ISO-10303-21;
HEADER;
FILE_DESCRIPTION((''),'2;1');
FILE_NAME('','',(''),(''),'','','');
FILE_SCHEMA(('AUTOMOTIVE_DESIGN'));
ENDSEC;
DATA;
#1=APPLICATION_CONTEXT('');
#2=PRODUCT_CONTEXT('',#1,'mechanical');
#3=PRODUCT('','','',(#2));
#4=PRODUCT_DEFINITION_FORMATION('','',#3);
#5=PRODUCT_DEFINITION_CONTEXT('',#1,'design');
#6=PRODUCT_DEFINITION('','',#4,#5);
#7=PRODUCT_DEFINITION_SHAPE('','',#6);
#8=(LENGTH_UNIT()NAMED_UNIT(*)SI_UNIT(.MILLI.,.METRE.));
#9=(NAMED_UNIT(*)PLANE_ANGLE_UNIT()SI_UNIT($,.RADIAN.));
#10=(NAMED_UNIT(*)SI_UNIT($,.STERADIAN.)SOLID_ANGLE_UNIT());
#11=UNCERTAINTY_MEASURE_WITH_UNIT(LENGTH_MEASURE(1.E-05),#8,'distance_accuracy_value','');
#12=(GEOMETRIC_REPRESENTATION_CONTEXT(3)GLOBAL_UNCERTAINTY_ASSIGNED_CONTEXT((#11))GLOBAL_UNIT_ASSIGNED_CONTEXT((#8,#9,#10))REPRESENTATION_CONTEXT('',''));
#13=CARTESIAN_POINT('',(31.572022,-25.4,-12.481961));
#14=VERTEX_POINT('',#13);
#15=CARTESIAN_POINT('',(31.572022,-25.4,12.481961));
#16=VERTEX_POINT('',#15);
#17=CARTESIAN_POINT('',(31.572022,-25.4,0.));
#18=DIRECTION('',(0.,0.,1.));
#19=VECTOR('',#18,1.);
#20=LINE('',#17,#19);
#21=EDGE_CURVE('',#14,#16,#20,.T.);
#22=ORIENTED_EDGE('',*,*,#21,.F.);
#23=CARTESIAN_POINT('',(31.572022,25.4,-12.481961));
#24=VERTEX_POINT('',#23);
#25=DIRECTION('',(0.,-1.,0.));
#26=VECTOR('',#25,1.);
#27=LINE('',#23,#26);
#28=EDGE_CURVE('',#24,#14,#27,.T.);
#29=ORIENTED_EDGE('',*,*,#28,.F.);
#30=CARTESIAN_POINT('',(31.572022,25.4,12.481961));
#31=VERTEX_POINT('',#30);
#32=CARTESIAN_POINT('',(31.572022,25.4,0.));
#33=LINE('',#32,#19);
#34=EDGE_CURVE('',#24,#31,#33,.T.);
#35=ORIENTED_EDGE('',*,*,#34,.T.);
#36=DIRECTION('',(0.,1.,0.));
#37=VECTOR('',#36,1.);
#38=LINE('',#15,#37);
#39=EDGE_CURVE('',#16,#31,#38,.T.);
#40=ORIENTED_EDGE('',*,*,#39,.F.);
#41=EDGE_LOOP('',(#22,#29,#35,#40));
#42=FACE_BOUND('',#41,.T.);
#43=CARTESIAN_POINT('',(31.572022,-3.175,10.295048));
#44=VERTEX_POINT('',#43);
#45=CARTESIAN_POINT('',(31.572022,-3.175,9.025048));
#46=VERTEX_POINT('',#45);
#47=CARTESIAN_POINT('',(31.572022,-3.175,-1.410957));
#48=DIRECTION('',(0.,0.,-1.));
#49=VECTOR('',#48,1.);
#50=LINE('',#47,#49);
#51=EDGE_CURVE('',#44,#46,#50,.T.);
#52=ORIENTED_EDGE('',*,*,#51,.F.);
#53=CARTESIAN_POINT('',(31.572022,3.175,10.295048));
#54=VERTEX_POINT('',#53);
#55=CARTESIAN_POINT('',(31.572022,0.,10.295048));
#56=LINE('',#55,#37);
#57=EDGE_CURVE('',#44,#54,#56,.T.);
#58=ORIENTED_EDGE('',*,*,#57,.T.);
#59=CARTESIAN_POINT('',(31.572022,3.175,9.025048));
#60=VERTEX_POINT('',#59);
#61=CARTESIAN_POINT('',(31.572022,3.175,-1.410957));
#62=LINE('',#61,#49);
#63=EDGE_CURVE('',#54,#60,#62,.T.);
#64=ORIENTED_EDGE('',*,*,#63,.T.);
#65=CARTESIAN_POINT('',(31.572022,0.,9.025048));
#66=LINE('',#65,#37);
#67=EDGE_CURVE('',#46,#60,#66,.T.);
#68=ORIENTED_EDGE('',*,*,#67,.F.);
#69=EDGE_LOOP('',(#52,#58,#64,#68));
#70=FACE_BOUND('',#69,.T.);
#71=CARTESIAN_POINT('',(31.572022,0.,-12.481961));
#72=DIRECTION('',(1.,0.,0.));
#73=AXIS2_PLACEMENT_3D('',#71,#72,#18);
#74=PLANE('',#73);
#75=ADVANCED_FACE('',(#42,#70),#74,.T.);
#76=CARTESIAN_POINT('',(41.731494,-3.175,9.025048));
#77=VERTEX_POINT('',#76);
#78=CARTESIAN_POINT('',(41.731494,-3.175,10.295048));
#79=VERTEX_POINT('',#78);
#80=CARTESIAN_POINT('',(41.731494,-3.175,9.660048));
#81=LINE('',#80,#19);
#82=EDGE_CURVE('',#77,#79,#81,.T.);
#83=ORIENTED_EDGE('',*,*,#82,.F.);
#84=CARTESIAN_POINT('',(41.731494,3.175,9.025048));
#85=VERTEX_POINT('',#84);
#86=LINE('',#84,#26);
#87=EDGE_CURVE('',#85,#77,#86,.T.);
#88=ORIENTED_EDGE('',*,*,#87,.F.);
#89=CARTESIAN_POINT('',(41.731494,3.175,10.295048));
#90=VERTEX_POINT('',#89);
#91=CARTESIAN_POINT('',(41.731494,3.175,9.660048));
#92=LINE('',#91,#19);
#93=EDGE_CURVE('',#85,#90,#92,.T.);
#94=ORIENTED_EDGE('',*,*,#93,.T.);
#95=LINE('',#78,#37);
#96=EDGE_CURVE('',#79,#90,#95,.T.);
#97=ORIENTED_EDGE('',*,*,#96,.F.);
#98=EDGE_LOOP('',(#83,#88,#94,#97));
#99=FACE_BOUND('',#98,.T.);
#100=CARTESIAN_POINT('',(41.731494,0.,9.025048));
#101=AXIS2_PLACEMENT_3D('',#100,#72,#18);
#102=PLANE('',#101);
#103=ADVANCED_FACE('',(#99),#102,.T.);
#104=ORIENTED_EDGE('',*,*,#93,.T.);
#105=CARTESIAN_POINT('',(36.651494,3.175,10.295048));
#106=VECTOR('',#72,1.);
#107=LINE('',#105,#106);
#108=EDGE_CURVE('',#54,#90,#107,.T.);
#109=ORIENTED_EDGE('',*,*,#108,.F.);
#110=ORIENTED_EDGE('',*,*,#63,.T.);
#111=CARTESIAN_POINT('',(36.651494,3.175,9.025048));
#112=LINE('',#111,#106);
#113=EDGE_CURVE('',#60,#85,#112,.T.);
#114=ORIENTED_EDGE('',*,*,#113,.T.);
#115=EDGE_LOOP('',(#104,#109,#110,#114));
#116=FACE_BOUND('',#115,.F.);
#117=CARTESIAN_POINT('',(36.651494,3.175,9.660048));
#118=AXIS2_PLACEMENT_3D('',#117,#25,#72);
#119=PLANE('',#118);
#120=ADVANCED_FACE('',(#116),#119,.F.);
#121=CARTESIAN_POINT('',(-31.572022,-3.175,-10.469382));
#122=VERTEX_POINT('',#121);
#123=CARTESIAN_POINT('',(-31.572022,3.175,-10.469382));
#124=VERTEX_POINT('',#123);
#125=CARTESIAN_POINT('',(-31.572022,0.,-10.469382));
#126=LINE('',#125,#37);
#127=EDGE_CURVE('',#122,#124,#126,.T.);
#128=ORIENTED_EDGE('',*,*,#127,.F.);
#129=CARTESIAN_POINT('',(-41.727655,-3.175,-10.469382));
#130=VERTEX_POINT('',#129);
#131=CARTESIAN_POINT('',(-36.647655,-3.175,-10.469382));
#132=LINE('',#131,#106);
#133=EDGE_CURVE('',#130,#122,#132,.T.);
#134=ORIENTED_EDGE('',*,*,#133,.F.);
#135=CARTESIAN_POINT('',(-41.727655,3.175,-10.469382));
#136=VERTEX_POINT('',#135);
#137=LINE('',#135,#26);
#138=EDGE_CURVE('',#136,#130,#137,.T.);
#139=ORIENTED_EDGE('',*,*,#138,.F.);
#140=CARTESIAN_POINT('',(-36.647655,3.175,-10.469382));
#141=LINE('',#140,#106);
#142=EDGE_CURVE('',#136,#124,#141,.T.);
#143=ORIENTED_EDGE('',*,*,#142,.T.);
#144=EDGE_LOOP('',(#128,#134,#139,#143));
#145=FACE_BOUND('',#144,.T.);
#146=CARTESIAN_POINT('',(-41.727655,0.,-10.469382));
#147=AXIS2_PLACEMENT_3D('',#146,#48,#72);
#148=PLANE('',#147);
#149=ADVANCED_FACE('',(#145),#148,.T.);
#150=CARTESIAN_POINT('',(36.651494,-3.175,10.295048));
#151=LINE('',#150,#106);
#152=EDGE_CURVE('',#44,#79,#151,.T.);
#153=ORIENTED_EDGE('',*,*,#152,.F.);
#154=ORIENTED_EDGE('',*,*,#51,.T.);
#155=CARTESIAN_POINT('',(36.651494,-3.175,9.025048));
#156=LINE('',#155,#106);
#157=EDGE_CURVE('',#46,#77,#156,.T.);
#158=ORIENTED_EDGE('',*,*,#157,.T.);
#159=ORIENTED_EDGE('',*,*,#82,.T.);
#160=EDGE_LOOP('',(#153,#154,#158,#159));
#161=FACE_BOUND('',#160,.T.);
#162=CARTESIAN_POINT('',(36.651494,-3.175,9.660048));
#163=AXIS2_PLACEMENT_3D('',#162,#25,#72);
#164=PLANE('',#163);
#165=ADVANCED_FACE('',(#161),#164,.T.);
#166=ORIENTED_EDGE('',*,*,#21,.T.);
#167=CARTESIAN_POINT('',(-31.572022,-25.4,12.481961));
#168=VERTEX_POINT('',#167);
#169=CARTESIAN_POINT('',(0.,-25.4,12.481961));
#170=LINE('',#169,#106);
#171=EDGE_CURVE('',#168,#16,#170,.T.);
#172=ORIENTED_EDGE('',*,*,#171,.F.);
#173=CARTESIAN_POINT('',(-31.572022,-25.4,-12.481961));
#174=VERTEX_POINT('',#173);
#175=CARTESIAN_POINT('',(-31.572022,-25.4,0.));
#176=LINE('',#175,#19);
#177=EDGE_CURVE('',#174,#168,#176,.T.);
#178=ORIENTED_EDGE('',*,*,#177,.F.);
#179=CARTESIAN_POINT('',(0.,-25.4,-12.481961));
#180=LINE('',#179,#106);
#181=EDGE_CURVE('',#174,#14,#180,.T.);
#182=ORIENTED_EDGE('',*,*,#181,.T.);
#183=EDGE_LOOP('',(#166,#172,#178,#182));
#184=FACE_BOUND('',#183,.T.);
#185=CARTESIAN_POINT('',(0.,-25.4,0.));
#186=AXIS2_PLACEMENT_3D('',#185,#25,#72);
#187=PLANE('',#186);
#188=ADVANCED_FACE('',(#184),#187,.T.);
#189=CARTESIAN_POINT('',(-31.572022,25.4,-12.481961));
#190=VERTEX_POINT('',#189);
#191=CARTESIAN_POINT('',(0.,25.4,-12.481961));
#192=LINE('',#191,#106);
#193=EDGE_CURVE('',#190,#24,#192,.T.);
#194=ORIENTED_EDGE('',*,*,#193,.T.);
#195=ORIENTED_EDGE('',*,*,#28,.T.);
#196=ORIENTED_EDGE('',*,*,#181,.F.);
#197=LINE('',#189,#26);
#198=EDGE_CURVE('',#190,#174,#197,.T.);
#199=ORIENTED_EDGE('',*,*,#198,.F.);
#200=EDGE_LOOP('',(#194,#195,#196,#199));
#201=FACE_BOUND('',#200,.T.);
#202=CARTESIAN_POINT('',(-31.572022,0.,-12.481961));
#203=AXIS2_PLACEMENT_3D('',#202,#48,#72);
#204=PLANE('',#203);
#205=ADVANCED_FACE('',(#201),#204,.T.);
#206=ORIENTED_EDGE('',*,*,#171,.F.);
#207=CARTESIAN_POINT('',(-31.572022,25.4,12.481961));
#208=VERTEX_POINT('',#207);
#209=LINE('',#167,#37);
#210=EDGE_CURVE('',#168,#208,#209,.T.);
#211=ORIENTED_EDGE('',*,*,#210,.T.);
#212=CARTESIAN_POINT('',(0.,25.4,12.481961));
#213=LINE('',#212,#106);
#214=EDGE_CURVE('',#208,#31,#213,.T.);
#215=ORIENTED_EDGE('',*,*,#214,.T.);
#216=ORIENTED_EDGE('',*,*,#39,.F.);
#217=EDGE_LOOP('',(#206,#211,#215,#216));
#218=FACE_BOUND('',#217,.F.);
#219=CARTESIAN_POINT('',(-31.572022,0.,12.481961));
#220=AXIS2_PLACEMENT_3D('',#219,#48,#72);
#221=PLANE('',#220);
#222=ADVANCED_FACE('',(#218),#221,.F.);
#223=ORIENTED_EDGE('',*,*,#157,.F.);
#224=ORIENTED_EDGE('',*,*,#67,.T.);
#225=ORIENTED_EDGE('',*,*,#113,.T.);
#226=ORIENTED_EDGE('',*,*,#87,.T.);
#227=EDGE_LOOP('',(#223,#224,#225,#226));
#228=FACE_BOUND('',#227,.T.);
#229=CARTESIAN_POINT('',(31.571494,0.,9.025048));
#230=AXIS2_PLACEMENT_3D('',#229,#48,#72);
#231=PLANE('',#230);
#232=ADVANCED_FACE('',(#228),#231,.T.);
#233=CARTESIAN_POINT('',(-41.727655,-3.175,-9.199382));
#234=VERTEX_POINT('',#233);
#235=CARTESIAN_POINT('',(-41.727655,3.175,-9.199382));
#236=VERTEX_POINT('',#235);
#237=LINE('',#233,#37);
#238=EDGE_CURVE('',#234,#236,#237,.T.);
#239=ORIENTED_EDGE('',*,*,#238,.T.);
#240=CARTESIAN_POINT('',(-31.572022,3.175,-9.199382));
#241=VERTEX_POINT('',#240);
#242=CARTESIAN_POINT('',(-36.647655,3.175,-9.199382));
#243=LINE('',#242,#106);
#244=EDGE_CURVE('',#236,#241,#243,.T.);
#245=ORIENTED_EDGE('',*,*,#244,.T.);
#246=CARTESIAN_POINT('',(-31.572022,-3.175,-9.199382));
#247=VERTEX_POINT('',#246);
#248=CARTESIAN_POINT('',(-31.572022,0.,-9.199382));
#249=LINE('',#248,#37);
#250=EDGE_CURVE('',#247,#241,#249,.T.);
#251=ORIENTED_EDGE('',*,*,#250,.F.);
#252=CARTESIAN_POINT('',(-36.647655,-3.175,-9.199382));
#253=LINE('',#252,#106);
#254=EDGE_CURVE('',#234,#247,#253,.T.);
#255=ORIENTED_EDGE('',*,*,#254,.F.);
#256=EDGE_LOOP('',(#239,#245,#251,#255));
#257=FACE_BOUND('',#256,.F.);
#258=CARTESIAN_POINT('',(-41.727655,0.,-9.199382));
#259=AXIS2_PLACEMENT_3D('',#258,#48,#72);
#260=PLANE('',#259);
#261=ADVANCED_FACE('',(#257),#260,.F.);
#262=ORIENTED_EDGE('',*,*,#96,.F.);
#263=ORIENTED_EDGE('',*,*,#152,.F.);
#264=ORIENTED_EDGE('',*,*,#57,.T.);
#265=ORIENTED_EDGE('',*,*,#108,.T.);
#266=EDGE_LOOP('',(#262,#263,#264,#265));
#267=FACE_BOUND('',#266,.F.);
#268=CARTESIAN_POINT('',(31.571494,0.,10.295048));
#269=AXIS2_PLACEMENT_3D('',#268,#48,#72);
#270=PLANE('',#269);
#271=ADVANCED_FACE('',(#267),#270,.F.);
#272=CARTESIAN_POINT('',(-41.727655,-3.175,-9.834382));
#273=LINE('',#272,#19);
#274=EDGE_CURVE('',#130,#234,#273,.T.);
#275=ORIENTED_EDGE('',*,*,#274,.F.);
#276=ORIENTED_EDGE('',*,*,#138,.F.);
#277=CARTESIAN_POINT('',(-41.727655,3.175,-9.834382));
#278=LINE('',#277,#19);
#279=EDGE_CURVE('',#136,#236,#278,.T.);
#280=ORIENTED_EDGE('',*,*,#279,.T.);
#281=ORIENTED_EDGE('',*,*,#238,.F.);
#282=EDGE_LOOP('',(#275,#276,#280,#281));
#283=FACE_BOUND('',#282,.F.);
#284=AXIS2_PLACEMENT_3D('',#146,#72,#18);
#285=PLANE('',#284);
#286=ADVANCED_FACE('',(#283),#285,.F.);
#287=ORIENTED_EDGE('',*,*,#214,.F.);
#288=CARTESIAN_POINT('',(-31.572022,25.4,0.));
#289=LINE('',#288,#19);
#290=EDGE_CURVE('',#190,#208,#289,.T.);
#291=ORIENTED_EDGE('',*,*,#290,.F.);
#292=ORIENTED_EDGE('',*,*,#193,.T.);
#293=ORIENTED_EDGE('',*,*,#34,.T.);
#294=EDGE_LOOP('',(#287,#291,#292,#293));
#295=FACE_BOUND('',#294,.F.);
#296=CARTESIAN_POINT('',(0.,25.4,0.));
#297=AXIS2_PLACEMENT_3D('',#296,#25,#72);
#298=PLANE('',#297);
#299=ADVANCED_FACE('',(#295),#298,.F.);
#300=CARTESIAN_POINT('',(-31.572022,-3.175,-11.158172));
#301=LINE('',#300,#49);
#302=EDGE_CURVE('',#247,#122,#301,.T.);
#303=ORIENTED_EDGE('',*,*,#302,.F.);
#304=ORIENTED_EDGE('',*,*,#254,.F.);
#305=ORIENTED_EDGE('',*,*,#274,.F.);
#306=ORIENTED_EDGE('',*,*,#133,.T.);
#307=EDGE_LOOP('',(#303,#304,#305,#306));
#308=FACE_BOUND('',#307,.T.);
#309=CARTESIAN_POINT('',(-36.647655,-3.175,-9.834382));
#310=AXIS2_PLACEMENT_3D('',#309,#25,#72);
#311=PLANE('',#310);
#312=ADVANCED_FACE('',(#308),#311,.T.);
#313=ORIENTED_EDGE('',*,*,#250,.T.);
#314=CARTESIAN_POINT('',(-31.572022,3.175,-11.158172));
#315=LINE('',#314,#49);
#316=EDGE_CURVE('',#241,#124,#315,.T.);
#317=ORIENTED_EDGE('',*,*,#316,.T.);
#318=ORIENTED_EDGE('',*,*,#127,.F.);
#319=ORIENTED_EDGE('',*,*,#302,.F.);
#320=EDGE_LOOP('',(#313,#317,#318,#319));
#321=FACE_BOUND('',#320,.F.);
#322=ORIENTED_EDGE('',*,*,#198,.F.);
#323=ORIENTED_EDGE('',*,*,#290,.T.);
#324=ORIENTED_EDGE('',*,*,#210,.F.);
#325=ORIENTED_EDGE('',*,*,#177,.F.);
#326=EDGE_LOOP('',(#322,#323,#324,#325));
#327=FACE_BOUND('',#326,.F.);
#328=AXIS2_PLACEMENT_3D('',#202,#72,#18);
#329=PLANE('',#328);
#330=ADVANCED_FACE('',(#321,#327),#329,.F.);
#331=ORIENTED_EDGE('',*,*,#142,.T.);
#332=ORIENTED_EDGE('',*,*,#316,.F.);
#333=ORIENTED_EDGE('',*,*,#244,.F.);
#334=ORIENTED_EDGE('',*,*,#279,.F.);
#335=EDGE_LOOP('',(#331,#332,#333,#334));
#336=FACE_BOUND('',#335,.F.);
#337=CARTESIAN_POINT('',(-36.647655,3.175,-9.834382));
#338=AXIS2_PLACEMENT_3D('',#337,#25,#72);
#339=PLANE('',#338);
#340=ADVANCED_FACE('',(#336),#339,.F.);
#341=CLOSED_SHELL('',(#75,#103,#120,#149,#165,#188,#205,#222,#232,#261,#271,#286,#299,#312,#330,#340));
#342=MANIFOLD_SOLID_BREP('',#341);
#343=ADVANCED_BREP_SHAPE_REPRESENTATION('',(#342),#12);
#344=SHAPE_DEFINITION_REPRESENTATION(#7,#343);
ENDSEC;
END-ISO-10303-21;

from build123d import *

# Parameters (mm, degrees)
F0_W     = 63.144043088
F0_H     = 24.9639227986
F1_DEPTH = 25.4
F2_W     = 10.16
F2_H     = 1.27
F3_DEPTH = 3.175
F4_W     = 10.16
F4_H     = 1.27
F5_DEPTH = 3.175


# Not quite as in the source:
# - a feature names something its author has since deleted; it is built from what else it names


with BuildPart() as f1:
    # F0 (on Front) → F1 (new body, symmetric)
    with BuildSketch(Plane.XZ):
        Rectangle(F0_W, F0_H)
    extrude(amount=F1_DEPTH, both=True)

    # F2 (on Front) → F3 (join, symmetric)
    with BuildSketch(Plane.XZ):
        with Locations((36.6514939815, 9.6600476645)):
            Rectangle(F2_W, F2_H)
    extrude(amount=F3_DEPTH, both=True)

    # F4 (on Front) → F5 (join, symmetric)
    with BuildSketch(Plane.XZ):
        with Locations((-36.6476550698, -9.8343824477)):
            Rectangle(F4_W, F4_H)
    extrude(amount=F5_DEPTH, both=True)


solid = f1.part
